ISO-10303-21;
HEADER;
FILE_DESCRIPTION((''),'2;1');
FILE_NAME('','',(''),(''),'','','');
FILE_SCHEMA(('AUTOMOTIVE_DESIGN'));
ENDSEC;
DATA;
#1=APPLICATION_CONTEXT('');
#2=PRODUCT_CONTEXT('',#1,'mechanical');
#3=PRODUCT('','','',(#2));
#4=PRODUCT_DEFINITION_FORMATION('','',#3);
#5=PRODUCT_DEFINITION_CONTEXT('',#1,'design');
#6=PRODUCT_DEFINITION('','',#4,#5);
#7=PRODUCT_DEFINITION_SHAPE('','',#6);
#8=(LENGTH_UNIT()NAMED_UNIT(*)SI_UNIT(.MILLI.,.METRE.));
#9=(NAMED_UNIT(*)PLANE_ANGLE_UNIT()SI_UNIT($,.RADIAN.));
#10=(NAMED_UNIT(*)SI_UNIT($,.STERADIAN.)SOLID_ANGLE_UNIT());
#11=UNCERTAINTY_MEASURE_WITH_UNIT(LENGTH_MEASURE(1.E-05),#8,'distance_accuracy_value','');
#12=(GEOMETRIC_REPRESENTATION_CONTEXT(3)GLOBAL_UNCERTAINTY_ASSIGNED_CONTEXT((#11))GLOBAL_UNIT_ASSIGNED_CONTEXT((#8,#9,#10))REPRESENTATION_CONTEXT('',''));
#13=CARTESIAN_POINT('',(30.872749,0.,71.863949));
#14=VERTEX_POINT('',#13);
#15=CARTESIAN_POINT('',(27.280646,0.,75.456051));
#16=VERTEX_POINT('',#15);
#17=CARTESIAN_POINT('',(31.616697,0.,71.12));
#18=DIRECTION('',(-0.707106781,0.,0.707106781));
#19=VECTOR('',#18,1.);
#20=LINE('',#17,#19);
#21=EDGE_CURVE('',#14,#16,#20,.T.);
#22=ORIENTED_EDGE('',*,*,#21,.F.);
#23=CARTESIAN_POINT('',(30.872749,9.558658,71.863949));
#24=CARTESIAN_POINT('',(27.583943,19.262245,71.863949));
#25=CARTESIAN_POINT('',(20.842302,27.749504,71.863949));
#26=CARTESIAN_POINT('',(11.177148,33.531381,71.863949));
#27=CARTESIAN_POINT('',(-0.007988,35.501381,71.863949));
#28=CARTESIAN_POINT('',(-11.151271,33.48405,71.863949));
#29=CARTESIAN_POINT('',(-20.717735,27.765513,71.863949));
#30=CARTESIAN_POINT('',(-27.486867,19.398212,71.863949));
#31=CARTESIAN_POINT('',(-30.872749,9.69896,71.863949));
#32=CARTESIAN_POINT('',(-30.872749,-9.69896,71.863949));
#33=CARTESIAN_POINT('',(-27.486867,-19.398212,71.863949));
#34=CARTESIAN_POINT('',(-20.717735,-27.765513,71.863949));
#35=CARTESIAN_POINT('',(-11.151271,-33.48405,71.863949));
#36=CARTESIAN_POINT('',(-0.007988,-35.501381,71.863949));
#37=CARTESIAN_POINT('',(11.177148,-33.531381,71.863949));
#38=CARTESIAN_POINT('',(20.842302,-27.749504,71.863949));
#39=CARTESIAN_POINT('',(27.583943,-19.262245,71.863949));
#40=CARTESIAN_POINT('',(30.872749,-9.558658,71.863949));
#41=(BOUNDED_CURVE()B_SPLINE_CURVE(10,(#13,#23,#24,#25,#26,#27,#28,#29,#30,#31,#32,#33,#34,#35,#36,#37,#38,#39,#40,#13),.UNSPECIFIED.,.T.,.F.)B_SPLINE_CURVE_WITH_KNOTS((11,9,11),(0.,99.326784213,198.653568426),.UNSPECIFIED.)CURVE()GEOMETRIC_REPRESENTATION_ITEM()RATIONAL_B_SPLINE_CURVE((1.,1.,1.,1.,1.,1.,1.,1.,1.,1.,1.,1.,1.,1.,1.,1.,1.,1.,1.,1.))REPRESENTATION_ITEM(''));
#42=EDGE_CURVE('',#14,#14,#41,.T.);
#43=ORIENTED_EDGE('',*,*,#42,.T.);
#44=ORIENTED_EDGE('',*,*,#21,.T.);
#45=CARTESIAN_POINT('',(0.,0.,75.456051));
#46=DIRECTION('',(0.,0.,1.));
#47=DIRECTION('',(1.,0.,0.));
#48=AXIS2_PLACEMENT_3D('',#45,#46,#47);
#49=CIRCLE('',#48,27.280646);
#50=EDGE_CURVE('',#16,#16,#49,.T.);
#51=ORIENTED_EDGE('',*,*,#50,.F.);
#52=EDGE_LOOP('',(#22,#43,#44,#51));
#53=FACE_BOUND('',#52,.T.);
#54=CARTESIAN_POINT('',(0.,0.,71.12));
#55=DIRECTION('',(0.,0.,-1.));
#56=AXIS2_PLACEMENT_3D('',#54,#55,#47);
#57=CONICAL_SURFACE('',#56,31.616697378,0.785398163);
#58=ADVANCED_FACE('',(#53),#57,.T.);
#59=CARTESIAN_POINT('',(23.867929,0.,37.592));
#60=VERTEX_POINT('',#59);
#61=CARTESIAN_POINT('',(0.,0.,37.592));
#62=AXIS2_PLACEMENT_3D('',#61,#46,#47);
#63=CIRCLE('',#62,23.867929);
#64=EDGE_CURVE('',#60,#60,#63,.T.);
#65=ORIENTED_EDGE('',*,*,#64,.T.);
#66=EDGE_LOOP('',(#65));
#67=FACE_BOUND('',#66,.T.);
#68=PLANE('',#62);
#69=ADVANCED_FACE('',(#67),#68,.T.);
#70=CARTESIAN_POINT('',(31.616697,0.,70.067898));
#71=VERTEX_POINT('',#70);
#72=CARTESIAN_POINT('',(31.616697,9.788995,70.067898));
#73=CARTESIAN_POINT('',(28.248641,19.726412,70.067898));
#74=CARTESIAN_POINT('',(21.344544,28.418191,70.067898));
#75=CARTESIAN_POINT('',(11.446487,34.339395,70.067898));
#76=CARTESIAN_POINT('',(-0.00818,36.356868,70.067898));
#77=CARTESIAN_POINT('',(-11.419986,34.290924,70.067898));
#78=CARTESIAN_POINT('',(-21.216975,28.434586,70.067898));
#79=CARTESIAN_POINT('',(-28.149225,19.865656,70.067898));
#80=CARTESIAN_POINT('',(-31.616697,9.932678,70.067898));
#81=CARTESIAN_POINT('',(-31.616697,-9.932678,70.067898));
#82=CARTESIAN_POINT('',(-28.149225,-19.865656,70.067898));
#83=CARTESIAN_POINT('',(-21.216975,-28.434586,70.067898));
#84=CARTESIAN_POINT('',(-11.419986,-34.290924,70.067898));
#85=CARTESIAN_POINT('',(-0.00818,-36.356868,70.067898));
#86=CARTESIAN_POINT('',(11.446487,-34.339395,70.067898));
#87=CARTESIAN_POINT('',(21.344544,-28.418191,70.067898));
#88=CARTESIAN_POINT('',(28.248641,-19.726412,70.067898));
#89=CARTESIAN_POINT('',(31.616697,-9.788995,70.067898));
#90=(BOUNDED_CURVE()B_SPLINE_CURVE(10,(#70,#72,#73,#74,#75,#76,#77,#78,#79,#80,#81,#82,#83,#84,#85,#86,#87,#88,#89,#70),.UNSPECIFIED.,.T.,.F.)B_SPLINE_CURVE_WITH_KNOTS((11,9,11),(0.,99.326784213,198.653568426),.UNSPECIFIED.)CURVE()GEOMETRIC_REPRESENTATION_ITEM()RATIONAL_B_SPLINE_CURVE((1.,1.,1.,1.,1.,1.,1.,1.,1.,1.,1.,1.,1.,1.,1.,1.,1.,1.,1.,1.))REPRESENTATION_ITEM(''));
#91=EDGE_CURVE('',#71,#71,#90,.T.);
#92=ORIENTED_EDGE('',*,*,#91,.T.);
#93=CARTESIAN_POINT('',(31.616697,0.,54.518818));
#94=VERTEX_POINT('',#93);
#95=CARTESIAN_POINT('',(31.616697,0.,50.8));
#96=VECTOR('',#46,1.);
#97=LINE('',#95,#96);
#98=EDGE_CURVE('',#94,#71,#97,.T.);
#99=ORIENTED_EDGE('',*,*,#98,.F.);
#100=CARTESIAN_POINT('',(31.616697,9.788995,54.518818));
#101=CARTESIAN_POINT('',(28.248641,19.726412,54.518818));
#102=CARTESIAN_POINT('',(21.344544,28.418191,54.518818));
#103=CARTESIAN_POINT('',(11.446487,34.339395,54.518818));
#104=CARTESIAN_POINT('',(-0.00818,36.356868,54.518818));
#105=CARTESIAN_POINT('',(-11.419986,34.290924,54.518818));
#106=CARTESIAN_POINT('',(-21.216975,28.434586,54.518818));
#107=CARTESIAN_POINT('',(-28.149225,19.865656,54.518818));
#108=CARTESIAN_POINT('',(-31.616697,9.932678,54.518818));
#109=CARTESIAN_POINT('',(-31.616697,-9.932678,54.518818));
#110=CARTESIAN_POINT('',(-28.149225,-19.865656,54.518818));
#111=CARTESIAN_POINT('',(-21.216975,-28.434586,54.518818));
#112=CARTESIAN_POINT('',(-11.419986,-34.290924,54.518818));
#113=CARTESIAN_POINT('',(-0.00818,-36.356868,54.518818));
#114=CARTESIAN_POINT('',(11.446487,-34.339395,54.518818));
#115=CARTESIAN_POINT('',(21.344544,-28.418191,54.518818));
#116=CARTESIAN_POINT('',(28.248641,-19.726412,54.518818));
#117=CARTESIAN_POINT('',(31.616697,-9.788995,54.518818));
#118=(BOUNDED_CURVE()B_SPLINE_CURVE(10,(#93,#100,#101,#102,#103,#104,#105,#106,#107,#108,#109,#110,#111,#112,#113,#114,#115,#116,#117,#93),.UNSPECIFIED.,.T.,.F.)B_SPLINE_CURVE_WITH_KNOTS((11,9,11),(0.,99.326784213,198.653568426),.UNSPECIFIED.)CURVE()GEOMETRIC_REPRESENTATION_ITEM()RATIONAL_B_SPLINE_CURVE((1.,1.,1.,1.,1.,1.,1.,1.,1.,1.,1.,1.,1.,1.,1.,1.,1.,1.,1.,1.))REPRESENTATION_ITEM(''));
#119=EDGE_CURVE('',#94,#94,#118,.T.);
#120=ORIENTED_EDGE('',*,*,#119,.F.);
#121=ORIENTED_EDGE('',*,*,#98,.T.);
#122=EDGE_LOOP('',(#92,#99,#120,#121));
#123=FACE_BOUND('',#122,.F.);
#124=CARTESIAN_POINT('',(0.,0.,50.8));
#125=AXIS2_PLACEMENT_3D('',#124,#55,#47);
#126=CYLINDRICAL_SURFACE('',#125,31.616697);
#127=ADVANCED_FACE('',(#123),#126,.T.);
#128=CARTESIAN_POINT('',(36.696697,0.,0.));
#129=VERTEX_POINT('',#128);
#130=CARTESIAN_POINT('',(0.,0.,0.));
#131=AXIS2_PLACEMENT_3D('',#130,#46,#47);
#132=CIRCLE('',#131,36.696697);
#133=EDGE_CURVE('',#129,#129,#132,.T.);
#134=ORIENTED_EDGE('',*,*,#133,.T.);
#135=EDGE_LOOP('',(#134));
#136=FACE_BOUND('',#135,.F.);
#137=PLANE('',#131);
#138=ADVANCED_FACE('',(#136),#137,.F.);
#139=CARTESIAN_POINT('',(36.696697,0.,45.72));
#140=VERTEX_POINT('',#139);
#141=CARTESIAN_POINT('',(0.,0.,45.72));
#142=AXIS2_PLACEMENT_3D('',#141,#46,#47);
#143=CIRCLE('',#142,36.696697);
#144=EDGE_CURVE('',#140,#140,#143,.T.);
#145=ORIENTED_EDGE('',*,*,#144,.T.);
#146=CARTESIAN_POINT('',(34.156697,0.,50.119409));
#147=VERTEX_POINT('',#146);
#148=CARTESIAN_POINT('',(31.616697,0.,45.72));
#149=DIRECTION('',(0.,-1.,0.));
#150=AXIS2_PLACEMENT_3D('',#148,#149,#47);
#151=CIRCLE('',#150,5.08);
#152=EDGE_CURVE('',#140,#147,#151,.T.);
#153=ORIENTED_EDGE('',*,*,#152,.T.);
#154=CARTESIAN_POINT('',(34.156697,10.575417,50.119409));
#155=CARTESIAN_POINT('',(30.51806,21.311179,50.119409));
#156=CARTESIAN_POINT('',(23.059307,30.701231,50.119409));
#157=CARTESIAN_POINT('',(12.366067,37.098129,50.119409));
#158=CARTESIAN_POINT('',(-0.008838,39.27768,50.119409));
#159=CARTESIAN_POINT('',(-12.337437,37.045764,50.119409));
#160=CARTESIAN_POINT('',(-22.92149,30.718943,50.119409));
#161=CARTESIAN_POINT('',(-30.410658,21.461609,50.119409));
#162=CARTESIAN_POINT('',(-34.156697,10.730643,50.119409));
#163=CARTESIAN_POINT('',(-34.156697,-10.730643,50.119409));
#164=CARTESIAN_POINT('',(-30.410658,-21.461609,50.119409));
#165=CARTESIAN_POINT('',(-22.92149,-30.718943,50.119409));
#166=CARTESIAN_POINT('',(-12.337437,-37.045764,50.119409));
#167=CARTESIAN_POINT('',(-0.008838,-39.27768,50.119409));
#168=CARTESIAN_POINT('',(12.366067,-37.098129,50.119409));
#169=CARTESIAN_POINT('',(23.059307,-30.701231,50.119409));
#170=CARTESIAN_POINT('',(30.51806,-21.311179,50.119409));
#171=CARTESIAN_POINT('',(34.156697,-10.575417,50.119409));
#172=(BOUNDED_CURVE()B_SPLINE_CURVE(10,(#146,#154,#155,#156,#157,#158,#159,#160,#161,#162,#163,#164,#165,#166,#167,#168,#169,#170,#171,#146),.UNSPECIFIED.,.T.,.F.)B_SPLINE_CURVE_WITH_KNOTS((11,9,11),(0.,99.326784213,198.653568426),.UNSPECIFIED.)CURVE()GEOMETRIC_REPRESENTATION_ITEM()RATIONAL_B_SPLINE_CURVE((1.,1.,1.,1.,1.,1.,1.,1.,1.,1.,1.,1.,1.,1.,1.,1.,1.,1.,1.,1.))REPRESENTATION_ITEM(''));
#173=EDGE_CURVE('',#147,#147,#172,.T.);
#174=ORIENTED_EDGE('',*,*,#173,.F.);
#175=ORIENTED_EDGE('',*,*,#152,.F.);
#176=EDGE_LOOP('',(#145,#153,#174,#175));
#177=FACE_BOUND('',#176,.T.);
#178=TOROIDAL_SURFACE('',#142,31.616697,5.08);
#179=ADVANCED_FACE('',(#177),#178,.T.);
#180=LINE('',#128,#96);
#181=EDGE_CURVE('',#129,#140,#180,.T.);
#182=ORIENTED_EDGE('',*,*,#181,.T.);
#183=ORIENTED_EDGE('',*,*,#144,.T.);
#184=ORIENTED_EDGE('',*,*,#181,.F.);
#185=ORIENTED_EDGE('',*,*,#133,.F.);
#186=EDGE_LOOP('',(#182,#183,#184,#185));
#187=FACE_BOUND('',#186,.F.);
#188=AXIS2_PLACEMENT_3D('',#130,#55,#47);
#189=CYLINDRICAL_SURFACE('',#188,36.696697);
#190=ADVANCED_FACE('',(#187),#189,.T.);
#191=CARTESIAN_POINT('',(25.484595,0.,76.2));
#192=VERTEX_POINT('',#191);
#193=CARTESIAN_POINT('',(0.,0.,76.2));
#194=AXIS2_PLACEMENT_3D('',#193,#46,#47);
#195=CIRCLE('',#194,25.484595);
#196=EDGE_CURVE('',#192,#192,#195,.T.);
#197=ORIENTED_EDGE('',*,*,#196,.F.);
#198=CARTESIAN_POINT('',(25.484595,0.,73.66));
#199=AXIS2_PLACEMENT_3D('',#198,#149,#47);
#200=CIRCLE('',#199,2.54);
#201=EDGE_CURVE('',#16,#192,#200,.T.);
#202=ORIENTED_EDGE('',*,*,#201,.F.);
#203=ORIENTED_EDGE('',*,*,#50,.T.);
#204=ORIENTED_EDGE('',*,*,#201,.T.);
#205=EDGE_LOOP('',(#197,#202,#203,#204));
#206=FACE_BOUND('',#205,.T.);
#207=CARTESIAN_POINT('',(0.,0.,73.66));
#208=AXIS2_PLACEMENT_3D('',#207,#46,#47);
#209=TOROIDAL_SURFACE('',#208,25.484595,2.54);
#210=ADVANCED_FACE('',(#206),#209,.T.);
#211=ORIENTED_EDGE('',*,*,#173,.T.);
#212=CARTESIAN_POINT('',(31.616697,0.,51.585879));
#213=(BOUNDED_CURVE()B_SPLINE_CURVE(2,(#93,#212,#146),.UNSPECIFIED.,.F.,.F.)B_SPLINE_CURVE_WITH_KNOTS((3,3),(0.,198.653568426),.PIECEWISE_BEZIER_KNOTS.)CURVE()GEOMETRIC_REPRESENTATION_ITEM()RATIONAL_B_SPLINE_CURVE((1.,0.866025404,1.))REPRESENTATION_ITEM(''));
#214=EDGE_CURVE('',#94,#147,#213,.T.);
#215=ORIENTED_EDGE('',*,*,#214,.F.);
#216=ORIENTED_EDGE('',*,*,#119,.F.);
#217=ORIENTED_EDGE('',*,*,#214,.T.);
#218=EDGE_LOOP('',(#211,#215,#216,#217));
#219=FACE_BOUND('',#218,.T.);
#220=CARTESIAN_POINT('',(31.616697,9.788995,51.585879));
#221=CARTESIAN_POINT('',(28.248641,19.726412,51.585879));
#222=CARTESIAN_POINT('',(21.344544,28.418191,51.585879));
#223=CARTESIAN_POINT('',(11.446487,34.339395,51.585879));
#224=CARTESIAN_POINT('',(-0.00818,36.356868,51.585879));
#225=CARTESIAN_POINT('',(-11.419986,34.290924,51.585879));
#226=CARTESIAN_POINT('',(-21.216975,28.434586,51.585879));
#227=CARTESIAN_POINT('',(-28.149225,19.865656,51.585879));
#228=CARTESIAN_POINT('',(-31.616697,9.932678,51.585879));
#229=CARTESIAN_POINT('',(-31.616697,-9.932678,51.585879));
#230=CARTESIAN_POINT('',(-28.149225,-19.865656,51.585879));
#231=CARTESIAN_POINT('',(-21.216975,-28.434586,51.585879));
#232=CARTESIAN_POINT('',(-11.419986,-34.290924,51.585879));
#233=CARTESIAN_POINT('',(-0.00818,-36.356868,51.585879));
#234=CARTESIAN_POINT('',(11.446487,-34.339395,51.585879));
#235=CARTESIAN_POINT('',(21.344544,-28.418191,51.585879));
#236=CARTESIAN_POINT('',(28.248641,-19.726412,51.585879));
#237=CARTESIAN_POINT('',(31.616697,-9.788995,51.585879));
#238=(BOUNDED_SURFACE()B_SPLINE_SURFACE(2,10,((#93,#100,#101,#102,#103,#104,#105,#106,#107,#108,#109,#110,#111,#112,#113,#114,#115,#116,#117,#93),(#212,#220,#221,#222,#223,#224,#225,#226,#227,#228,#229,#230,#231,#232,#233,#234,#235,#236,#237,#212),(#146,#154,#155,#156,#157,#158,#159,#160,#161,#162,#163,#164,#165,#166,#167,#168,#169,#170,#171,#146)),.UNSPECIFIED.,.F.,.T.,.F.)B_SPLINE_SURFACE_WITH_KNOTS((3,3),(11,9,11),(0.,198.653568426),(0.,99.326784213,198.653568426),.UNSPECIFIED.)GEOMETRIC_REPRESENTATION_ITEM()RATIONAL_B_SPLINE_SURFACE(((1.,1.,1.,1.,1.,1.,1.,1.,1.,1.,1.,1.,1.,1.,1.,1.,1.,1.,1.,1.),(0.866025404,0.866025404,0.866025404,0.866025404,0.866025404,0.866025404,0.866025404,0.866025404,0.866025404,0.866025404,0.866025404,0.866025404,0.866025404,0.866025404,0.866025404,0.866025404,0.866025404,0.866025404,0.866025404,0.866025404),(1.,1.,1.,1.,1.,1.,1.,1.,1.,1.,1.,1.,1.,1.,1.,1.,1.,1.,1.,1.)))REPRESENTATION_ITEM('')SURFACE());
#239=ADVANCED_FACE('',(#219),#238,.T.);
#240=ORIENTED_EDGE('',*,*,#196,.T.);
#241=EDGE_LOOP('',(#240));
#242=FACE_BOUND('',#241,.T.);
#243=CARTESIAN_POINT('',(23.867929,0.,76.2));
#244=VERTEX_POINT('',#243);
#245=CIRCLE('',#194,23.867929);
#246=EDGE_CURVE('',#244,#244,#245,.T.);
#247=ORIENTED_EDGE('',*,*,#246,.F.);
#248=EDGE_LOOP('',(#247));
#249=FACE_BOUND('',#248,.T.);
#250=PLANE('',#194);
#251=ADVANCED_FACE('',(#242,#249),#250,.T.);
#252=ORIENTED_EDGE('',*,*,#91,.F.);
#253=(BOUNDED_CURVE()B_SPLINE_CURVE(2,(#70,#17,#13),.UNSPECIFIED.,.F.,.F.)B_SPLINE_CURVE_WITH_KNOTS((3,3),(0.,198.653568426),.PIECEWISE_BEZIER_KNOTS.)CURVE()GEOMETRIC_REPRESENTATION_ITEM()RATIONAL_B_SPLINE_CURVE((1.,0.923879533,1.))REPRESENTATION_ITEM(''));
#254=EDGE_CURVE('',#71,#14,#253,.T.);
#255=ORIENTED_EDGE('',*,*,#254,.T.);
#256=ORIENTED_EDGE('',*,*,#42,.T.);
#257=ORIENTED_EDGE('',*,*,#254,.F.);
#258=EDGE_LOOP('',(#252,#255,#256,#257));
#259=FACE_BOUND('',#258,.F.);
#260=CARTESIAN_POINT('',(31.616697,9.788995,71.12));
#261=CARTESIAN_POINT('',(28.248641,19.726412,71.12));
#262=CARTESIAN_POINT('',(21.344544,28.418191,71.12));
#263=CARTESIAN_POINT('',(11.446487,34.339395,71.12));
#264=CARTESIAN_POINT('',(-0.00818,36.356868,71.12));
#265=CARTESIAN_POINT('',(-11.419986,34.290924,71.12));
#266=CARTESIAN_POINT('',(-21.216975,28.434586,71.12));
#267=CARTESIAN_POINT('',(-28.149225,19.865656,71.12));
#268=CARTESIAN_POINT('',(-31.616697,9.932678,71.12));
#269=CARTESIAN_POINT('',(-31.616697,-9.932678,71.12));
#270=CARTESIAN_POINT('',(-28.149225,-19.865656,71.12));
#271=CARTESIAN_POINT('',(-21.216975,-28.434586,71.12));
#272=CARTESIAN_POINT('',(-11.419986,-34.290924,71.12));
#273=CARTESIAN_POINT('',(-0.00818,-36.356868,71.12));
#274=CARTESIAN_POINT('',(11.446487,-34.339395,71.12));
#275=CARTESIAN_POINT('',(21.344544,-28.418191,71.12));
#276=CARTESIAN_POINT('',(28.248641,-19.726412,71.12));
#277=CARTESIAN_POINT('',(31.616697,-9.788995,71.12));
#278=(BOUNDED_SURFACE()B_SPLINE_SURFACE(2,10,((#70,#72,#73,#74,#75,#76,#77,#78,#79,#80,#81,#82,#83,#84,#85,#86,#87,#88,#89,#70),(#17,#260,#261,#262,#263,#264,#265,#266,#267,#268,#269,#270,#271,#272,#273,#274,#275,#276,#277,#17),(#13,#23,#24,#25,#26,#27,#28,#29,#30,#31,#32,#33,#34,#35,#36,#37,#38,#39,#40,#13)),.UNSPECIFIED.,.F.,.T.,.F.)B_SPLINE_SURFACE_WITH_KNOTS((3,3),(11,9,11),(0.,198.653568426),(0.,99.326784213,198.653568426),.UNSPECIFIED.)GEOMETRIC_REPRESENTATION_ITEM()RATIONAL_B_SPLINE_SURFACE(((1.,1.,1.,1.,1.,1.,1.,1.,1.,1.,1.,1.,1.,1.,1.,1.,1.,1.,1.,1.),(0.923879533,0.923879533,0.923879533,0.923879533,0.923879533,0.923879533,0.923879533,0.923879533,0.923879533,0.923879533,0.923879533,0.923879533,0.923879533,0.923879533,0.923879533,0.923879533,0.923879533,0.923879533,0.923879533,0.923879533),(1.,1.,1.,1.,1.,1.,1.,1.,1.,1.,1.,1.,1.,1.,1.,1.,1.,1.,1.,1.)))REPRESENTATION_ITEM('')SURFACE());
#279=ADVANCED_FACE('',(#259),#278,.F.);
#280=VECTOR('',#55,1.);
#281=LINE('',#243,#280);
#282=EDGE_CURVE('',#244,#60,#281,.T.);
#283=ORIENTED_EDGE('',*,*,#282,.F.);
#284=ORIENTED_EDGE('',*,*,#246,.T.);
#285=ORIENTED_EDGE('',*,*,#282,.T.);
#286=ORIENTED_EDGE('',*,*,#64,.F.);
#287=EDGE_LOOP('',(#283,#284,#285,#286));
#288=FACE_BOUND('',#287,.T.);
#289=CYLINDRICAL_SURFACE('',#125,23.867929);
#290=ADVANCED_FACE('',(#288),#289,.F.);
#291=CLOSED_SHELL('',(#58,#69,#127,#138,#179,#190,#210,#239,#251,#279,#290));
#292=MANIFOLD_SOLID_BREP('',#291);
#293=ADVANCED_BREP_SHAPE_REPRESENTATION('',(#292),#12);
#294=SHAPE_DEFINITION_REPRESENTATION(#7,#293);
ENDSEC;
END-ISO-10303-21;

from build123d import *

# Parameters (mm, degrees)
F0_R     = 36.6966973779
F1_DEPTH = 50.8
F2_R     = 5.08
F3_R     = 23.8679289638
F4_DEPTH = 13.208
F5_DEPTH = 25.4
F6_R     = 5.08
F7_SIZE  = 5.08
F8_R     = 2.54


# Not quite as in the source:
# - two fillets or chamfers of one size are made in one step


with BuildPart() as f1:
    # F0 (on Top) → F1 (new body)
    with BuildSketch(Plane.XY):
        Circle(F0_R)
    extrude(amount=F1_DEPTH)

    # F2
    f2_edges = [f1.edges().sort_by_distance(p)[0] for p in [
        (-36.696697, 0, 50.8),
    ]]
    fillet(f2_edges, radius=F2_R)

    # F3 (on face) → F4 (cut)
    with BuildSketch(Plane.XY.offset(50.8)):
        Circle(F3_R)
    extrude(amount=-F4_DEPTH, mode=Mode.SUBTRACT)

    # F5 (add): a face of the model
    f5_faces = [f1.faces().sort_by_distance(p)[0] for p in [
        (-30.7224421333, 0, 50.8),
    ]]
    extrude(f5_faces, amount=F5_DEPTH)

    # F6
    f6_edges = [f1.edges().sort_by_distance(p)[0] for p in [
        (-31.616697, 0, 50.8),
    ]]
    fillet(f6_edges, radius=F6_R)

    # F7
    f7_edges = [f1.edges().sort_by_distance(p)[0] for p in [
        (-31.616697, 0, 76.2),
    ]]
    chamfer(f7_edges, length=F7_SIZE)

    # F8
    f8_edges = [f1.edges().sort_by_distance(p)[0] for p in [
        (-31.616697, 0, 71.12),
        (-26.536697, 0, 76.2),
    ]]
    fillet(f8_edges, radius=F8_R)


solid = f1.part
